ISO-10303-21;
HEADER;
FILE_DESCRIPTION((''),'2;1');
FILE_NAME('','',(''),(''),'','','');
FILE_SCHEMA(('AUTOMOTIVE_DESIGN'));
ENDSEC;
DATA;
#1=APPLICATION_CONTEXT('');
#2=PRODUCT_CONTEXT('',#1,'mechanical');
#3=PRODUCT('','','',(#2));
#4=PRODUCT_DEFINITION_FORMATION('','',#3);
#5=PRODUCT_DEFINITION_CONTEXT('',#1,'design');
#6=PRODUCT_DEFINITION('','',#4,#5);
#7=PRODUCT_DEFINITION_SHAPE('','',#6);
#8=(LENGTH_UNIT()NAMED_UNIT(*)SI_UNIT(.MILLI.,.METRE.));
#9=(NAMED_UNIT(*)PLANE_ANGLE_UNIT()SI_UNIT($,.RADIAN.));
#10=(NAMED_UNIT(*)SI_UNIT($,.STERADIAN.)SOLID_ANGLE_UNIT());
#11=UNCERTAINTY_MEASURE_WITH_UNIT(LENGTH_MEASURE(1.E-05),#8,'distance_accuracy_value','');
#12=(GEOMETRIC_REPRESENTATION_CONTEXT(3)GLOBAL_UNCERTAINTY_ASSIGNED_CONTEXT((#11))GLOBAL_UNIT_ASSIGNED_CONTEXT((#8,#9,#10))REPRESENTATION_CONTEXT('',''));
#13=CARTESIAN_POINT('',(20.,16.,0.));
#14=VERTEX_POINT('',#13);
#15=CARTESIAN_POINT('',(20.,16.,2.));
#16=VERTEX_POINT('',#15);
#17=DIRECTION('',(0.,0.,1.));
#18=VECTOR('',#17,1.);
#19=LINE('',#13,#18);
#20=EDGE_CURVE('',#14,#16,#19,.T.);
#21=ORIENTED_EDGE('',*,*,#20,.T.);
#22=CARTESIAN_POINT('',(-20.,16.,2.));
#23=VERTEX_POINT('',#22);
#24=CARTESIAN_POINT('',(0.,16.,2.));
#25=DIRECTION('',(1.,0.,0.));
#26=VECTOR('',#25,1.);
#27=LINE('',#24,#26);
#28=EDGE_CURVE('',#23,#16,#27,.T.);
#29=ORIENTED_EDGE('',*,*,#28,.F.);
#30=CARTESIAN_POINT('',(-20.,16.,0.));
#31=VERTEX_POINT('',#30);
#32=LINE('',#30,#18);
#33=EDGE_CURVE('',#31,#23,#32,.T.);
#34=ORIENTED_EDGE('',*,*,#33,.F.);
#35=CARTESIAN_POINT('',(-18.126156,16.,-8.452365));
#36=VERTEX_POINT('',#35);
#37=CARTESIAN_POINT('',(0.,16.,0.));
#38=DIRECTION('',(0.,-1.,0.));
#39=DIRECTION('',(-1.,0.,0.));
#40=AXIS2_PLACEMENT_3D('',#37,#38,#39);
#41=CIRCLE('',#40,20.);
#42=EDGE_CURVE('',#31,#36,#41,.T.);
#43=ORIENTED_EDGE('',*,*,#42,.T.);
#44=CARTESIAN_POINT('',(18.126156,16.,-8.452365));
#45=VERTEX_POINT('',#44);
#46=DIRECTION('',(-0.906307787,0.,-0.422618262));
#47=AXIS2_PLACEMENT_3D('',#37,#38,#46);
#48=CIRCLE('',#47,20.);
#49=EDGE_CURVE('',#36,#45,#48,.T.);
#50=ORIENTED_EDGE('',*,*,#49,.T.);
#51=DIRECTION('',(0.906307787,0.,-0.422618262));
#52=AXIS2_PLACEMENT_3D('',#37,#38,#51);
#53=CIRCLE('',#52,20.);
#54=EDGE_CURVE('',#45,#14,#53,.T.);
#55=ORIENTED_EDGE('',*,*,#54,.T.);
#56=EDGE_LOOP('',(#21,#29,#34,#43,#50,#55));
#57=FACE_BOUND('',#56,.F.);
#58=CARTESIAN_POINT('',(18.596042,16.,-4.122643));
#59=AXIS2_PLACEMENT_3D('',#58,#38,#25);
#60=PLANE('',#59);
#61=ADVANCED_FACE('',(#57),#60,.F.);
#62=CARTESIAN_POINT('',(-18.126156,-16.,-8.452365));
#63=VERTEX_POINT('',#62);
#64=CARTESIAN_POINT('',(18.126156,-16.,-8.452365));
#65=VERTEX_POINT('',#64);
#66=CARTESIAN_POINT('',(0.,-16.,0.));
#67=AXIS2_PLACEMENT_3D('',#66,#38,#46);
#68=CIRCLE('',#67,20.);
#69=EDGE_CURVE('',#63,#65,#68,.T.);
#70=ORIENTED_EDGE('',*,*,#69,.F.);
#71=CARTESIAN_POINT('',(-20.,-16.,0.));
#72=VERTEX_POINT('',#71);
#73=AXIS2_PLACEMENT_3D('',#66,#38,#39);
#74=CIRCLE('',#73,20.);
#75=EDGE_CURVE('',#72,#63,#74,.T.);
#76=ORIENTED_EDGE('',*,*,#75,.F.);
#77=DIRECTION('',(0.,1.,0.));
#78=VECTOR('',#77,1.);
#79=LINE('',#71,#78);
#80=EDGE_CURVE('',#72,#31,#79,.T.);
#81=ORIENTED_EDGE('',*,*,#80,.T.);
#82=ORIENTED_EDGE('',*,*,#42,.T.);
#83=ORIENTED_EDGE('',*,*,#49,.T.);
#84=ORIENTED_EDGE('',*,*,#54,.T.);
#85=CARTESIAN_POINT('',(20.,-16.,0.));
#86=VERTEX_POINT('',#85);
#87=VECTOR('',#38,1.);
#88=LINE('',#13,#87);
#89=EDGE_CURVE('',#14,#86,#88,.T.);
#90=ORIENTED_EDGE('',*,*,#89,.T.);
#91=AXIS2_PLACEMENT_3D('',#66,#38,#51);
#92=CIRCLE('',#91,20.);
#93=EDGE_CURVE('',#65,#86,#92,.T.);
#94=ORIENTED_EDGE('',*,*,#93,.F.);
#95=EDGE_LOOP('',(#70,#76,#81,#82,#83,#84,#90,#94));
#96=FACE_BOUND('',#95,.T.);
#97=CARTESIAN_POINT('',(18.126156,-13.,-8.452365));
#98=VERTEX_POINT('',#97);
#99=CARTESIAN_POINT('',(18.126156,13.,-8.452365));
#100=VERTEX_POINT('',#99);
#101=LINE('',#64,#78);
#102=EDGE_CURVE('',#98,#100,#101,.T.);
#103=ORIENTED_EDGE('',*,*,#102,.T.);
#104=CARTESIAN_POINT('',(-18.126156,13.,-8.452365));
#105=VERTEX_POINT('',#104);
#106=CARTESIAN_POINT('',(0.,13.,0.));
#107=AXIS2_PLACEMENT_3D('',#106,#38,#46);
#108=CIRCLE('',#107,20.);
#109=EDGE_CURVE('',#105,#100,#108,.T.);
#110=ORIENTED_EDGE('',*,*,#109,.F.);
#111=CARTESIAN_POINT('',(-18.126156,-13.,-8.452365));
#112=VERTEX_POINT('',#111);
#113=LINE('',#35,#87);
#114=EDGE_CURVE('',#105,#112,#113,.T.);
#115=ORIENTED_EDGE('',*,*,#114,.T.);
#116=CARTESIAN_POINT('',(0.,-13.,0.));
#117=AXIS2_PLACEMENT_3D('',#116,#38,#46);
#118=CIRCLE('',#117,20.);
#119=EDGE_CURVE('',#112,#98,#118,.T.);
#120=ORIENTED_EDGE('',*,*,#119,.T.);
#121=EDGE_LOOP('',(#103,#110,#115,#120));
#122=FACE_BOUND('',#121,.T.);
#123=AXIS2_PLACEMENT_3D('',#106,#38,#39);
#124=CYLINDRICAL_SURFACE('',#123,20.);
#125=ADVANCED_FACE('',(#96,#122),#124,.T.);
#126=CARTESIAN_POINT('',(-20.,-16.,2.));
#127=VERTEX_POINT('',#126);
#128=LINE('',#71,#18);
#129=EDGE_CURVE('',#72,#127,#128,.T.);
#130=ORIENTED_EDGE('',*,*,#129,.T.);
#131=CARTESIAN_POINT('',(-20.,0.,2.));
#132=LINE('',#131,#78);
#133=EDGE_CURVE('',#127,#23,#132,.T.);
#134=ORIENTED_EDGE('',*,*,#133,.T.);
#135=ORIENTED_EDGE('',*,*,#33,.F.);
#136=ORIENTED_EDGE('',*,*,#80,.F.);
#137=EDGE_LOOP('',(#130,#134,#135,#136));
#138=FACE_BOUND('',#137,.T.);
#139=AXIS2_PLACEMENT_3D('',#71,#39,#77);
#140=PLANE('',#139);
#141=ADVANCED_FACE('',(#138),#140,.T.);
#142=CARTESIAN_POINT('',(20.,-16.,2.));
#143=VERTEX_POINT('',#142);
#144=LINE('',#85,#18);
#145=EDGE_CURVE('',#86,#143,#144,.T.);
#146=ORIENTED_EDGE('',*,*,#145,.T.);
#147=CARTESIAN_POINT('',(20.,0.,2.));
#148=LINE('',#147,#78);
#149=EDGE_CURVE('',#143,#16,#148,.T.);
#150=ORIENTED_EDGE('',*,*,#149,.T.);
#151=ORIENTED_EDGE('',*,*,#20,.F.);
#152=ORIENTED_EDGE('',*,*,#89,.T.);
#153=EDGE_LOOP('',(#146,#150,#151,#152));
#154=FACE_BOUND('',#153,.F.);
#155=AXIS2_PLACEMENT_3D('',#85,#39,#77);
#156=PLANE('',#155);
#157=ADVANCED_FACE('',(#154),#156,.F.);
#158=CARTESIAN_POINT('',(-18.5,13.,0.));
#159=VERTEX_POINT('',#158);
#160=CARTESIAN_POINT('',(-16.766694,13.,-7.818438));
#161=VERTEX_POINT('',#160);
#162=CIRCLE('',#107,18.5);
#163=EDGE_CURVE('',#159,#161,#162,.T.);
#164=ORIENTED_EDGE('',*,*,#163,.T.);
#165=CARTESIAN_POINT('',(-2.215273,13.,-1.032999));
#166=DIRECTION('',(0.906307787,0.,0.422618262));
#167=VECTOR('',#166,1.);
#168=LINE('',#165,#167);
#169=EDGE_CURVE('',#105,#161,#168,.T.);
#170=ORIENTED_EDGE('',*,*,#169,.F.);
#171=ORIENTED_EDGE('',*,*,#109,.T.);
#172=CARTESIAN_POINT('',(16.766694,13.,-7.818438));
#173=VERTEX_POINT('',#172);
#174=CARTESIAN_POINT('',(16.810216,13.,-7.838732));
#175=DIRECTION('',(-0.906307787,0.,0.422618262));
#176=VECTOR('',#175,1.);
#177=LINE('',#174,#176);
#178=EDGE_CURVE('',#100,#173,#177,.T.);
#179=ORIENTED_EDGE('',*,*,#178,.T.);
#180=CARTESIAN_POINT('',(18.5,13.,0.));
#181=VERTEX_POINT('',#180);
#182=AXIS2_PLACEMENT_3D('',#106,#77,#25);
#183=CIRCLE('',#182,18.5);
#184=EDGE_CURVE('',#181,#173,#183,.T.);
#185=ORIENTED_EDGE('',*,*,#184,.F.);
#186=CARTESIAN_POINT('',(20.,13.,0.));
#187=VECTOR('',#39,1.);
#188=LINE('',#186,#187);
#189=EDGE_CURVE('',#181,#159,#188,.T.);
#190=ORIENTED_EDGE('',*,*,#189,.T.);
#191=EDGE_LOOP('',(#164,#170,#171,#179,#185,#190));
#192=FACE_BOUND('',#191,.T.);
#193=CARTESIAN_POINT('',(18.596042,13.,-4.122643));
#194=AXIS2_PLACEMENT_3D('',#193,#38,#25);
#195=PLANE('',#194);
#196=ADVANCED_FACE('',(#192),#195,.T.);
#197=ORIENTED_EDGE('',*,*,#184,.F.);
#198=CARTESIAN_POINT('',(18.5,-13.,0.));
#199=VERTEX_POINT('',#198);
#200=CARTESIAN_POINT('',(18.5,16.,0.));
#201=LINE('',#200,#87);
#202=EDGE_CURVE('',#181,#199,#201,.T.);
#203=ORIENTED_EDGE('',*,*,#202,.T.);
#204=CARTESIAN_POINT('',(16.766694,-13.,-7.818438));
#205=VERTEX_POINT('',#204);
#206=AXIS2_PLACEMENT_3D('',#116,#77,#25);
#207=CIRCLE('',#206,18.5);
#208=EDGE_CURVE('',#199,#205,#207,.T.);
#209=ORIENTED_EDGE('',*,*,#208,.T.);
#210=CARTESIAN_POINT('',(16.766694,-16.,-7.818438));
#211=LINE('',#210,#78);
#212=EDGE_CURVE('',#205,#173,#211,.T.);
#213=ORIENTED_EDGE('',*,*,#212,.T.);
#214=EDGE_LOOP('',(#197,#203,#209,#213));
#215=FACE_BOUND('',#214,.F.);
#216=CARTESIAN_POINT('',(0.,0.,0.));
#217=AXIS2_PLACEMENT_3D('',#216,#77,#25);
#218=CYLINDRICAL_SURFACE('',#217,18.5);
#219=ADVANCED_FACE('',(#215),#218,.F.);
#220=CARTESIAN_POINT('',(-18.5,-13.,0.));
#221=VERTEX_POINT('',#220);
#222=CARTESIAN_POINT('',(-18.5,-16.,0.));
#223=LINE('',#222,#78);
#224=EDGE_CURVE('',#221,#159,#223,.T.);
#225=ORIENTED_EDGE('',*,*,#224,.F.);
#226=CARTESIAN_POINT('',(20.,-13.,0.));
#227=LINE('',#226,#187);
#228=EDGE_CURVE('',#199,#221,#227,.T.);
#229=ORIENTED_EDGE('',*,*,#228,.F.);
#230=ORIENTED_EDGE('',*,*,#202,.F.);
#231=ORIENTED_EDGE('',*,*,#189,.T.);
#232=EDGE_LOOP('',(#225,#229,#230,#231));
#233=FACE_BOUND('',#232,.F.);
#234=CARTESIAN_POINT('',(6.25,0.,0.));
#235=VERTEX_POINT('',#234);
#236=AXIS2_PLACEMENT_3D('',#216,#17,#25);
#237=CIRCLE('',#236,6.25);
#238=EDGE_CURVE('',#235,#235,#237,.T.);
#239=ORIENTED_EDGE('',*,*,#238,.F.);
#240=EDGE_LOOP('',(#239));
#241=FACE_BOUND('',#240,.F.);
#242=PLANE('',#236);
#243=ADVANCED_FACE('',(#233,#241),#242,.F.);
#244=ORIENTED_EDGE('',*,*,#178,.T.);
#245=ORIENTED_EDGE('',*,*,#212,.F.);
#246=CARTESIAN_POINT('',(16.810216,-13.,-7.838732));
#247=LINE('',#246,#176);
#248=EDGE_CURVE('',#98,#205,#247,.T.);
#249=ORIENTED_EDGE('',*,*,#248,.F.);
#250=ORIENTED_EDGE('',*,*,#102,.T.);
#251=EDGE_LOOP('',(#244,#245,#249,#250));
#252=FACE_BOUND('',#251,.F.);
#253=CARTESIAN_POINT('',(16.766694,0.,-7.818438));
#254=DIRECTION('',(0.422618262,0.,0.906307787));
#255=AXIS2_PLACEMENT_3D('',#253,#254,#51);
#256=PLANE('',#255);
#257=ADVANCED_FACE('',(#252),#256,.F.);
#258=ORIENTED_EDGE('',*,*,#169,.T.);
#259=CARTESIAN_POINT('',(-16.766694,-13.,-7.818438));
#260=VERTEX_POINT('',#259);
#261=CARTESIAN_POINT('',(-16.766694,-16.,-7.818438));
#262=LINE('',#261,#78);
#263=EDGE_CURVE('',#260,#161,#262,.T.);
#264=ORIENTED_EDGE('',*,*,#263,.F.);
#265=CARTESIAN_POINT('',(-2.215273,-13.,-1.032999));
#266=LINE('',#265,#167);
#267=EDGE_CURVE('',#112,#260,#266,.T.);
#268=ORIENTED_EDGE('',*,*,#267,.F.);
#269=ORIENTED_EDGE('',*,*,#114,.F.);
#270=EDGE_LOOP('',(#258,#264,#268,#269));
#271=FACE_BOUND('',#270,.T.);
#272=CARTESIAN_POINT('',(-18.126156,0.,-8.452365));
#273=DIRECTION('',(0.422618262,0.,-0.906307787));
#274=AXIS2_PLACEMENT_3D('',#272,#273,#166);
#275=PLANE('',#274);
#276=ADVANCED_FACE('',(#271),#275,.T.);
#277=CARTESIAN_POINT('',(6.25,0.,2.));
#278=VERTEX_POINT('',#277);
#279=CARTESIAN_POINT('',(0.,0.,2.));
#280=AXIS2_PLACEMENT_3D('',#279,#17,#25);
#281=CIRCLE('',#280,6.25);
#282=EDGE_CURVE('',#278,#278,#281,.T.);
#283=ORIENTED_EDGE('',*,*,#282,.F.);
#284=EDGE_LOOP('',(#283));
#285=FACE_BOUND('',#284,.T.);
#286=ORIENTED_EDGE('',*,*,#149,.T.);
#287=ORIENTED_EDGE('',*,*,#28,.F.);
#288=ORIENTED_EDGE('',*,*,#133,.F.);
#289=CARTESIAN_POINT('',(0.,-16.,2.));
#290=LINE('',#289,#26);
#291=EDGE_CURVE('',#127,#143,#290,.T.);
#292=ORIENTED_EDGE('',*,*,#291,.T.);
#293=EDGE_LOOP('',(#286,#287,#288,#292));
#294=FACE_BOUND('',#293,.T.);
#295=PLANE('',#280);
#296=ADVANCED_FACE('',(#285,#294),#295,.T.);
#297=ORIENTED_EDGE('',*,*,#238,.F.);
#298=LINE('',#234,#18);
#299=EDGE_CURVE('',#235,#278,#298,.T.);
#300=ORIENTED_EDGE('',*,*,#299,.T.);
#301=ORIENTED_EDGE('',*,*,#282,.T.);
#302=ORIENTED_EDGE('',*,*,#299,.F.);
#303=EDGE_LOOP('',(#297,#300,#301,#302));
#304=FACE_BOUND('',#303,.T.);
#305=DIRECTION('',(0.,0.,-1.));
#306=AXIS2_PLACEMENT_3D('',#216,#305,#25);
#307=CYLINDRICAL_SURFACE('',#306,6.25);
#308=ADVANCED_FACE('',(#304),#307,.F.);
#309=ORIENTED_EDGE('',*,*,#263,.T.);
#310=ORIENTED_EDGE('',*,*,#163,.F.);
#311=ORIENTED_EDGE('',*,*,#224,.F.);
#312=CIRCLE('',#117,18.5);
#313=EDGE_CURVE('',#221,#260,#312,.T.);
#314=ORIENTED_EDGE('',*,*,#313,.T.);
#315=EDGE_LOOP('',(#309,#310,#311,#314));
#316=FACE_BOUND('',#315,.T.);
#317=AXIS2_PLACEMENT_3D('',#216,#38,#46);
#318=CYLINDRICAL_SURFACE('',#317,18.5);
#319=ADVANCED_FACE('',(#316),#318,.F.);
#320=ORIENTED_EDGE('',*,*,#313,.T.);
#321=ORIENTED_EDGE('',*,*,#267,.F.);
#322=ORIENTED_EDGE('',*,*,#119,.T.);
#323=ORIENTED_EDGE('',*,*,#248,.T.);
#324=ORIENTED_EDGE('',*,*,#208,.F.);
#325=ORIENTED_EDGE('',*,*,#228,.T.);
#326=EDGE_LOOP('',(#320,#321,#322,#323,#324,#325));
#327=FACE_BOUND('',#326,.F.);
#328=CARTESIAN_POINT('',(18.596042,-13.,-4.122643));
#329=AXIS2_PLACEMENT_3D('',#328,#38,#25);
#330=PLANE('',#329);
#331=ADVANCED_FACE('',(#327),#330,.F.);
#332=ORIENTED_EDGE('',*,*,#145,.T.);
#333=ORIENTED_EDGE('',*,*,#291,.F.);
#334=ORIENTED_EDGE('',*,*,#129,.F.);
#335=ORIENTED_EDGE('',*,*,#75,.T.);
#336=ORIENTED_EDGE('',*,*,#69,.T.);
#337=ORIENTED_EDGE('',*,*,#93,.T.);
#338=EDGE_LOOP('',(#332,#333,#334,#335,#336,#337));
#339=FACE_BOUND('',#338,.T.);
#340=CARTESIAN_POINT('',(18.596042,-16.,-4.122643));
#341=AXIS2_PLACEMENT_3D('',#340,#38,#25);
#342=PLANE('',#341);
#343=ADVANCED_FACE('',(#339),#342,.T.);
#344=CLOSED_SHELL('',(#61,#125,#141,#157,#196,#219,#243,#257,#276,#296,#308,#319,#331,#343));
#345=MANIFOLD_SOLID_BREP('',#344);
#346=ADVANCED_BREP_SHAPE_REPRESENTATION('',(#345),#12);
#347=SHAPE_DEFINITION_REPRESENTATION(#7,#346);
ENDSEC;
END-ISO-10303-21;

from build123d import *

# Parameters (mm, degrees)
F0_W     = 40
F0_H     = 32
F0_R     = 6.25
F1_DEPTH = 2
F3_START = 13
F3_DEPTH = 3
F4_START = -13
F4_DEPTH = 3
F5_DEPTH = 16


with BuildPart() as f1:
    # F0 (on Top) → F1 (new body)
    with BuildSketch(Plane.XY):
        Rectangle(F0_W, F0_H)
        Circle(F0_R, mode=Mode.SUBTRACT)
    extrude(amount=F1_DEPTH)

    # F2 (on Front) → F3 (join)
    with BuildSketch(Plane.XZ.offset(F3_START)):
        with BuildLine():
            ThreePointArc((18.1261557407, -8.4523652348), (19.5259201424, -4.3287922788), (20, 0))
            Line((20, 0), (18.5, 0))
            ThreePointArc((18.5, 0), (18.0614761317, -4.0041328579), (16.7666940602, -7.8184378422))
            Line((16.7666940602, -7.8184378422), (18.1261557407, -8.4523652348))
        make_face()
        with BuildLine():
            Line((-18.5, 0), (-20, 0))
            ThreePointArc((-20, 0), (-19.5259201424, -4.3287922788), (-18.1261557407, -8.4523652348))
            Line((-18.1261557407, -8.4523652348), (-16.7666940602, -7.8184378422))
            ThreePointArc((-16.7666940602, -7.8184378422), (-18.0614761317, -4.0041328579), (-18.5, 0))
        make_face()
        with BuildLine():
            ThreePointArc((-18.1261557407, -8.4523652348), (0, -20), (18.1261557407, -8.4523652348))
            Line((18.1261557407, -8.4523652348), (16.7666940602, -7.8184378422))
            ThreePointArc((16.7666940602, -7.8184378422), (0, -18.5), (-16.7666940602, -7.8184378422))
            Line((-16.7666940602, -7.8184378422), (-18.1261557407, -8.4523652348))
        make_face()
        with BuildLine():
            ThreePointArc((16.7666940602, -7.8184378422), (18.0614761317, -4.0041328579), (18.5, 0))
            Line((18.5, 0), (0, 0))
            Line((0, 0), (16.7666940602, -7.8184378422))
        make_face()
        with BuildLine():
            Line((0, 0), (-18.5, 0))
            ThreePointArc((-18.5, 0), (-18.0614761317, -4.0041328579), (-16.7666940602, -7.8184378422))
            Line((-16.7666940602, -7.8184378422), (0, 0))
        make_face()
        with BuildLine():
            ThreePointArc((-16.7666940602, -7.8184378422), (0, -18.5), (16.7666940602, -7.8184378422))
            Line((16.7666940602, -7.8184378422), (0, 0))
            Line((0, 0), (-16.7666940602, -7.8184378422))
        make_face()
    extrude(amount=F3_DEPTH)

    # F2 (on Front) → F4 (join)
    with BuildSketch(Plane.XZ.offset(F4_START)):
        with BuildLine():
            ThreePointArc((18.1261557407, -8.4523652348), (19.5259201424, -4.3287922788), (20, 0))
            Line((20, 0), (18.5, 0))
            ThreePointArc((18.5, 0), (18.0614761317, -4.0041328579), (16.7666940602, -7.8184378422))
            Line((16.7666940602, -7.8184378422), (18.1261557407, -8.4523652348))
        make_face()
        with BuildLine():
            Line((-18.5, 0), (-20, 0))
            ThreePointArc((-20, 0), (-19.5259201424, -4.3287922788), (-18.1261557407, -8.4523652348))
            Line((-18.1261557407, -8.4523652348), (-16.7666940602, -7.8184378422))
            ThreePointArc((-16.7666940602, -7.8184378422), (-18.0614761317, -4.0041328579), (-18.5, 0))
        make_face()
        with BuildLine():
            ThreePointArc((-18.1261557407, -8.4523652348), (0, -20), (18.1261557407, -8.4523652348))
            Line((18.1261557407, -8.4523652348), (16.7666940602, -7.8184378422))
            ThreePointArc((16.7666940602, -7.8184378422), (0, -18.5), (-16.7666940602, -7.8184378422))
            Line((-16.7666940602, -7.8184378422), (-18.1261557407, -8.4523652348))
        make_face()
        with BuildLine():
            ThreePointArc((16.7666940602, -7.8184378422), (18.0614761317, -4.0041328579), (18.5, 0))
            Line((18.5, 0), (0, 0))
            Line((0, 0), (16.7666940602, -7.8184378422))
        make_face()
        with BuildLine():
            Line((0, 0), (-18.5, 0))
            ThreePointArc((-18.5, 0), (-18.0614761317, -4.0041328579), (-16.7666940602, -7.8184378422))
            Line((-16.7666940602, -7.8184378422), (0, 0))
        make_face()
        with BuildLine():
            ThreePointArc((-16.7666940602, -7.8184378422), (0, -18.5), (16.7666940602, -7.8184378422))
            Line((16.7666940602, -7.8184378422), (0, 0))
            Line((0, 0), (-16.7666940602, -7.8184378422))
        make_face()
    extrude(amount=-F4_DEPTH)

    # F2 (on Front) → F5 (join, symmetric)
    with BuildSketch(Plane.XZ):
        with BuildLine():
            ThreePointArc((18.1261557407, -8.4523652348), (19.5259201424, -4.3287922788), (20, 0))
            Line((20, 0), (18.5, 0))
            ThreePointArc((18.5, 0), (18.0614761317, -4.0041328579), (16.7666940602, -7.8184378422))
            Line((16.7666940602, -7.8184378422), (18.1261557407, -8.4523652348))
        make_face()
        with BuildLine():
            Line((-18.5, 0), (-20, 0))
            ThreePointArc((-20, 0), (-19.5259201424, -4.3287922788), (-18.1261557407, -8.4523652348))
            Line((-18.1261557407, -8.4523652348), (-16.7666940602, -7.8184378422))
            ThreePointArc((-16.7666940602, -7.8184378422), (-18.0614761317, -4.0041328579), (-18.5, 0))
        make_face()
    extrude(amount=F5_DEPTH, both=True)


solid = f1.part
